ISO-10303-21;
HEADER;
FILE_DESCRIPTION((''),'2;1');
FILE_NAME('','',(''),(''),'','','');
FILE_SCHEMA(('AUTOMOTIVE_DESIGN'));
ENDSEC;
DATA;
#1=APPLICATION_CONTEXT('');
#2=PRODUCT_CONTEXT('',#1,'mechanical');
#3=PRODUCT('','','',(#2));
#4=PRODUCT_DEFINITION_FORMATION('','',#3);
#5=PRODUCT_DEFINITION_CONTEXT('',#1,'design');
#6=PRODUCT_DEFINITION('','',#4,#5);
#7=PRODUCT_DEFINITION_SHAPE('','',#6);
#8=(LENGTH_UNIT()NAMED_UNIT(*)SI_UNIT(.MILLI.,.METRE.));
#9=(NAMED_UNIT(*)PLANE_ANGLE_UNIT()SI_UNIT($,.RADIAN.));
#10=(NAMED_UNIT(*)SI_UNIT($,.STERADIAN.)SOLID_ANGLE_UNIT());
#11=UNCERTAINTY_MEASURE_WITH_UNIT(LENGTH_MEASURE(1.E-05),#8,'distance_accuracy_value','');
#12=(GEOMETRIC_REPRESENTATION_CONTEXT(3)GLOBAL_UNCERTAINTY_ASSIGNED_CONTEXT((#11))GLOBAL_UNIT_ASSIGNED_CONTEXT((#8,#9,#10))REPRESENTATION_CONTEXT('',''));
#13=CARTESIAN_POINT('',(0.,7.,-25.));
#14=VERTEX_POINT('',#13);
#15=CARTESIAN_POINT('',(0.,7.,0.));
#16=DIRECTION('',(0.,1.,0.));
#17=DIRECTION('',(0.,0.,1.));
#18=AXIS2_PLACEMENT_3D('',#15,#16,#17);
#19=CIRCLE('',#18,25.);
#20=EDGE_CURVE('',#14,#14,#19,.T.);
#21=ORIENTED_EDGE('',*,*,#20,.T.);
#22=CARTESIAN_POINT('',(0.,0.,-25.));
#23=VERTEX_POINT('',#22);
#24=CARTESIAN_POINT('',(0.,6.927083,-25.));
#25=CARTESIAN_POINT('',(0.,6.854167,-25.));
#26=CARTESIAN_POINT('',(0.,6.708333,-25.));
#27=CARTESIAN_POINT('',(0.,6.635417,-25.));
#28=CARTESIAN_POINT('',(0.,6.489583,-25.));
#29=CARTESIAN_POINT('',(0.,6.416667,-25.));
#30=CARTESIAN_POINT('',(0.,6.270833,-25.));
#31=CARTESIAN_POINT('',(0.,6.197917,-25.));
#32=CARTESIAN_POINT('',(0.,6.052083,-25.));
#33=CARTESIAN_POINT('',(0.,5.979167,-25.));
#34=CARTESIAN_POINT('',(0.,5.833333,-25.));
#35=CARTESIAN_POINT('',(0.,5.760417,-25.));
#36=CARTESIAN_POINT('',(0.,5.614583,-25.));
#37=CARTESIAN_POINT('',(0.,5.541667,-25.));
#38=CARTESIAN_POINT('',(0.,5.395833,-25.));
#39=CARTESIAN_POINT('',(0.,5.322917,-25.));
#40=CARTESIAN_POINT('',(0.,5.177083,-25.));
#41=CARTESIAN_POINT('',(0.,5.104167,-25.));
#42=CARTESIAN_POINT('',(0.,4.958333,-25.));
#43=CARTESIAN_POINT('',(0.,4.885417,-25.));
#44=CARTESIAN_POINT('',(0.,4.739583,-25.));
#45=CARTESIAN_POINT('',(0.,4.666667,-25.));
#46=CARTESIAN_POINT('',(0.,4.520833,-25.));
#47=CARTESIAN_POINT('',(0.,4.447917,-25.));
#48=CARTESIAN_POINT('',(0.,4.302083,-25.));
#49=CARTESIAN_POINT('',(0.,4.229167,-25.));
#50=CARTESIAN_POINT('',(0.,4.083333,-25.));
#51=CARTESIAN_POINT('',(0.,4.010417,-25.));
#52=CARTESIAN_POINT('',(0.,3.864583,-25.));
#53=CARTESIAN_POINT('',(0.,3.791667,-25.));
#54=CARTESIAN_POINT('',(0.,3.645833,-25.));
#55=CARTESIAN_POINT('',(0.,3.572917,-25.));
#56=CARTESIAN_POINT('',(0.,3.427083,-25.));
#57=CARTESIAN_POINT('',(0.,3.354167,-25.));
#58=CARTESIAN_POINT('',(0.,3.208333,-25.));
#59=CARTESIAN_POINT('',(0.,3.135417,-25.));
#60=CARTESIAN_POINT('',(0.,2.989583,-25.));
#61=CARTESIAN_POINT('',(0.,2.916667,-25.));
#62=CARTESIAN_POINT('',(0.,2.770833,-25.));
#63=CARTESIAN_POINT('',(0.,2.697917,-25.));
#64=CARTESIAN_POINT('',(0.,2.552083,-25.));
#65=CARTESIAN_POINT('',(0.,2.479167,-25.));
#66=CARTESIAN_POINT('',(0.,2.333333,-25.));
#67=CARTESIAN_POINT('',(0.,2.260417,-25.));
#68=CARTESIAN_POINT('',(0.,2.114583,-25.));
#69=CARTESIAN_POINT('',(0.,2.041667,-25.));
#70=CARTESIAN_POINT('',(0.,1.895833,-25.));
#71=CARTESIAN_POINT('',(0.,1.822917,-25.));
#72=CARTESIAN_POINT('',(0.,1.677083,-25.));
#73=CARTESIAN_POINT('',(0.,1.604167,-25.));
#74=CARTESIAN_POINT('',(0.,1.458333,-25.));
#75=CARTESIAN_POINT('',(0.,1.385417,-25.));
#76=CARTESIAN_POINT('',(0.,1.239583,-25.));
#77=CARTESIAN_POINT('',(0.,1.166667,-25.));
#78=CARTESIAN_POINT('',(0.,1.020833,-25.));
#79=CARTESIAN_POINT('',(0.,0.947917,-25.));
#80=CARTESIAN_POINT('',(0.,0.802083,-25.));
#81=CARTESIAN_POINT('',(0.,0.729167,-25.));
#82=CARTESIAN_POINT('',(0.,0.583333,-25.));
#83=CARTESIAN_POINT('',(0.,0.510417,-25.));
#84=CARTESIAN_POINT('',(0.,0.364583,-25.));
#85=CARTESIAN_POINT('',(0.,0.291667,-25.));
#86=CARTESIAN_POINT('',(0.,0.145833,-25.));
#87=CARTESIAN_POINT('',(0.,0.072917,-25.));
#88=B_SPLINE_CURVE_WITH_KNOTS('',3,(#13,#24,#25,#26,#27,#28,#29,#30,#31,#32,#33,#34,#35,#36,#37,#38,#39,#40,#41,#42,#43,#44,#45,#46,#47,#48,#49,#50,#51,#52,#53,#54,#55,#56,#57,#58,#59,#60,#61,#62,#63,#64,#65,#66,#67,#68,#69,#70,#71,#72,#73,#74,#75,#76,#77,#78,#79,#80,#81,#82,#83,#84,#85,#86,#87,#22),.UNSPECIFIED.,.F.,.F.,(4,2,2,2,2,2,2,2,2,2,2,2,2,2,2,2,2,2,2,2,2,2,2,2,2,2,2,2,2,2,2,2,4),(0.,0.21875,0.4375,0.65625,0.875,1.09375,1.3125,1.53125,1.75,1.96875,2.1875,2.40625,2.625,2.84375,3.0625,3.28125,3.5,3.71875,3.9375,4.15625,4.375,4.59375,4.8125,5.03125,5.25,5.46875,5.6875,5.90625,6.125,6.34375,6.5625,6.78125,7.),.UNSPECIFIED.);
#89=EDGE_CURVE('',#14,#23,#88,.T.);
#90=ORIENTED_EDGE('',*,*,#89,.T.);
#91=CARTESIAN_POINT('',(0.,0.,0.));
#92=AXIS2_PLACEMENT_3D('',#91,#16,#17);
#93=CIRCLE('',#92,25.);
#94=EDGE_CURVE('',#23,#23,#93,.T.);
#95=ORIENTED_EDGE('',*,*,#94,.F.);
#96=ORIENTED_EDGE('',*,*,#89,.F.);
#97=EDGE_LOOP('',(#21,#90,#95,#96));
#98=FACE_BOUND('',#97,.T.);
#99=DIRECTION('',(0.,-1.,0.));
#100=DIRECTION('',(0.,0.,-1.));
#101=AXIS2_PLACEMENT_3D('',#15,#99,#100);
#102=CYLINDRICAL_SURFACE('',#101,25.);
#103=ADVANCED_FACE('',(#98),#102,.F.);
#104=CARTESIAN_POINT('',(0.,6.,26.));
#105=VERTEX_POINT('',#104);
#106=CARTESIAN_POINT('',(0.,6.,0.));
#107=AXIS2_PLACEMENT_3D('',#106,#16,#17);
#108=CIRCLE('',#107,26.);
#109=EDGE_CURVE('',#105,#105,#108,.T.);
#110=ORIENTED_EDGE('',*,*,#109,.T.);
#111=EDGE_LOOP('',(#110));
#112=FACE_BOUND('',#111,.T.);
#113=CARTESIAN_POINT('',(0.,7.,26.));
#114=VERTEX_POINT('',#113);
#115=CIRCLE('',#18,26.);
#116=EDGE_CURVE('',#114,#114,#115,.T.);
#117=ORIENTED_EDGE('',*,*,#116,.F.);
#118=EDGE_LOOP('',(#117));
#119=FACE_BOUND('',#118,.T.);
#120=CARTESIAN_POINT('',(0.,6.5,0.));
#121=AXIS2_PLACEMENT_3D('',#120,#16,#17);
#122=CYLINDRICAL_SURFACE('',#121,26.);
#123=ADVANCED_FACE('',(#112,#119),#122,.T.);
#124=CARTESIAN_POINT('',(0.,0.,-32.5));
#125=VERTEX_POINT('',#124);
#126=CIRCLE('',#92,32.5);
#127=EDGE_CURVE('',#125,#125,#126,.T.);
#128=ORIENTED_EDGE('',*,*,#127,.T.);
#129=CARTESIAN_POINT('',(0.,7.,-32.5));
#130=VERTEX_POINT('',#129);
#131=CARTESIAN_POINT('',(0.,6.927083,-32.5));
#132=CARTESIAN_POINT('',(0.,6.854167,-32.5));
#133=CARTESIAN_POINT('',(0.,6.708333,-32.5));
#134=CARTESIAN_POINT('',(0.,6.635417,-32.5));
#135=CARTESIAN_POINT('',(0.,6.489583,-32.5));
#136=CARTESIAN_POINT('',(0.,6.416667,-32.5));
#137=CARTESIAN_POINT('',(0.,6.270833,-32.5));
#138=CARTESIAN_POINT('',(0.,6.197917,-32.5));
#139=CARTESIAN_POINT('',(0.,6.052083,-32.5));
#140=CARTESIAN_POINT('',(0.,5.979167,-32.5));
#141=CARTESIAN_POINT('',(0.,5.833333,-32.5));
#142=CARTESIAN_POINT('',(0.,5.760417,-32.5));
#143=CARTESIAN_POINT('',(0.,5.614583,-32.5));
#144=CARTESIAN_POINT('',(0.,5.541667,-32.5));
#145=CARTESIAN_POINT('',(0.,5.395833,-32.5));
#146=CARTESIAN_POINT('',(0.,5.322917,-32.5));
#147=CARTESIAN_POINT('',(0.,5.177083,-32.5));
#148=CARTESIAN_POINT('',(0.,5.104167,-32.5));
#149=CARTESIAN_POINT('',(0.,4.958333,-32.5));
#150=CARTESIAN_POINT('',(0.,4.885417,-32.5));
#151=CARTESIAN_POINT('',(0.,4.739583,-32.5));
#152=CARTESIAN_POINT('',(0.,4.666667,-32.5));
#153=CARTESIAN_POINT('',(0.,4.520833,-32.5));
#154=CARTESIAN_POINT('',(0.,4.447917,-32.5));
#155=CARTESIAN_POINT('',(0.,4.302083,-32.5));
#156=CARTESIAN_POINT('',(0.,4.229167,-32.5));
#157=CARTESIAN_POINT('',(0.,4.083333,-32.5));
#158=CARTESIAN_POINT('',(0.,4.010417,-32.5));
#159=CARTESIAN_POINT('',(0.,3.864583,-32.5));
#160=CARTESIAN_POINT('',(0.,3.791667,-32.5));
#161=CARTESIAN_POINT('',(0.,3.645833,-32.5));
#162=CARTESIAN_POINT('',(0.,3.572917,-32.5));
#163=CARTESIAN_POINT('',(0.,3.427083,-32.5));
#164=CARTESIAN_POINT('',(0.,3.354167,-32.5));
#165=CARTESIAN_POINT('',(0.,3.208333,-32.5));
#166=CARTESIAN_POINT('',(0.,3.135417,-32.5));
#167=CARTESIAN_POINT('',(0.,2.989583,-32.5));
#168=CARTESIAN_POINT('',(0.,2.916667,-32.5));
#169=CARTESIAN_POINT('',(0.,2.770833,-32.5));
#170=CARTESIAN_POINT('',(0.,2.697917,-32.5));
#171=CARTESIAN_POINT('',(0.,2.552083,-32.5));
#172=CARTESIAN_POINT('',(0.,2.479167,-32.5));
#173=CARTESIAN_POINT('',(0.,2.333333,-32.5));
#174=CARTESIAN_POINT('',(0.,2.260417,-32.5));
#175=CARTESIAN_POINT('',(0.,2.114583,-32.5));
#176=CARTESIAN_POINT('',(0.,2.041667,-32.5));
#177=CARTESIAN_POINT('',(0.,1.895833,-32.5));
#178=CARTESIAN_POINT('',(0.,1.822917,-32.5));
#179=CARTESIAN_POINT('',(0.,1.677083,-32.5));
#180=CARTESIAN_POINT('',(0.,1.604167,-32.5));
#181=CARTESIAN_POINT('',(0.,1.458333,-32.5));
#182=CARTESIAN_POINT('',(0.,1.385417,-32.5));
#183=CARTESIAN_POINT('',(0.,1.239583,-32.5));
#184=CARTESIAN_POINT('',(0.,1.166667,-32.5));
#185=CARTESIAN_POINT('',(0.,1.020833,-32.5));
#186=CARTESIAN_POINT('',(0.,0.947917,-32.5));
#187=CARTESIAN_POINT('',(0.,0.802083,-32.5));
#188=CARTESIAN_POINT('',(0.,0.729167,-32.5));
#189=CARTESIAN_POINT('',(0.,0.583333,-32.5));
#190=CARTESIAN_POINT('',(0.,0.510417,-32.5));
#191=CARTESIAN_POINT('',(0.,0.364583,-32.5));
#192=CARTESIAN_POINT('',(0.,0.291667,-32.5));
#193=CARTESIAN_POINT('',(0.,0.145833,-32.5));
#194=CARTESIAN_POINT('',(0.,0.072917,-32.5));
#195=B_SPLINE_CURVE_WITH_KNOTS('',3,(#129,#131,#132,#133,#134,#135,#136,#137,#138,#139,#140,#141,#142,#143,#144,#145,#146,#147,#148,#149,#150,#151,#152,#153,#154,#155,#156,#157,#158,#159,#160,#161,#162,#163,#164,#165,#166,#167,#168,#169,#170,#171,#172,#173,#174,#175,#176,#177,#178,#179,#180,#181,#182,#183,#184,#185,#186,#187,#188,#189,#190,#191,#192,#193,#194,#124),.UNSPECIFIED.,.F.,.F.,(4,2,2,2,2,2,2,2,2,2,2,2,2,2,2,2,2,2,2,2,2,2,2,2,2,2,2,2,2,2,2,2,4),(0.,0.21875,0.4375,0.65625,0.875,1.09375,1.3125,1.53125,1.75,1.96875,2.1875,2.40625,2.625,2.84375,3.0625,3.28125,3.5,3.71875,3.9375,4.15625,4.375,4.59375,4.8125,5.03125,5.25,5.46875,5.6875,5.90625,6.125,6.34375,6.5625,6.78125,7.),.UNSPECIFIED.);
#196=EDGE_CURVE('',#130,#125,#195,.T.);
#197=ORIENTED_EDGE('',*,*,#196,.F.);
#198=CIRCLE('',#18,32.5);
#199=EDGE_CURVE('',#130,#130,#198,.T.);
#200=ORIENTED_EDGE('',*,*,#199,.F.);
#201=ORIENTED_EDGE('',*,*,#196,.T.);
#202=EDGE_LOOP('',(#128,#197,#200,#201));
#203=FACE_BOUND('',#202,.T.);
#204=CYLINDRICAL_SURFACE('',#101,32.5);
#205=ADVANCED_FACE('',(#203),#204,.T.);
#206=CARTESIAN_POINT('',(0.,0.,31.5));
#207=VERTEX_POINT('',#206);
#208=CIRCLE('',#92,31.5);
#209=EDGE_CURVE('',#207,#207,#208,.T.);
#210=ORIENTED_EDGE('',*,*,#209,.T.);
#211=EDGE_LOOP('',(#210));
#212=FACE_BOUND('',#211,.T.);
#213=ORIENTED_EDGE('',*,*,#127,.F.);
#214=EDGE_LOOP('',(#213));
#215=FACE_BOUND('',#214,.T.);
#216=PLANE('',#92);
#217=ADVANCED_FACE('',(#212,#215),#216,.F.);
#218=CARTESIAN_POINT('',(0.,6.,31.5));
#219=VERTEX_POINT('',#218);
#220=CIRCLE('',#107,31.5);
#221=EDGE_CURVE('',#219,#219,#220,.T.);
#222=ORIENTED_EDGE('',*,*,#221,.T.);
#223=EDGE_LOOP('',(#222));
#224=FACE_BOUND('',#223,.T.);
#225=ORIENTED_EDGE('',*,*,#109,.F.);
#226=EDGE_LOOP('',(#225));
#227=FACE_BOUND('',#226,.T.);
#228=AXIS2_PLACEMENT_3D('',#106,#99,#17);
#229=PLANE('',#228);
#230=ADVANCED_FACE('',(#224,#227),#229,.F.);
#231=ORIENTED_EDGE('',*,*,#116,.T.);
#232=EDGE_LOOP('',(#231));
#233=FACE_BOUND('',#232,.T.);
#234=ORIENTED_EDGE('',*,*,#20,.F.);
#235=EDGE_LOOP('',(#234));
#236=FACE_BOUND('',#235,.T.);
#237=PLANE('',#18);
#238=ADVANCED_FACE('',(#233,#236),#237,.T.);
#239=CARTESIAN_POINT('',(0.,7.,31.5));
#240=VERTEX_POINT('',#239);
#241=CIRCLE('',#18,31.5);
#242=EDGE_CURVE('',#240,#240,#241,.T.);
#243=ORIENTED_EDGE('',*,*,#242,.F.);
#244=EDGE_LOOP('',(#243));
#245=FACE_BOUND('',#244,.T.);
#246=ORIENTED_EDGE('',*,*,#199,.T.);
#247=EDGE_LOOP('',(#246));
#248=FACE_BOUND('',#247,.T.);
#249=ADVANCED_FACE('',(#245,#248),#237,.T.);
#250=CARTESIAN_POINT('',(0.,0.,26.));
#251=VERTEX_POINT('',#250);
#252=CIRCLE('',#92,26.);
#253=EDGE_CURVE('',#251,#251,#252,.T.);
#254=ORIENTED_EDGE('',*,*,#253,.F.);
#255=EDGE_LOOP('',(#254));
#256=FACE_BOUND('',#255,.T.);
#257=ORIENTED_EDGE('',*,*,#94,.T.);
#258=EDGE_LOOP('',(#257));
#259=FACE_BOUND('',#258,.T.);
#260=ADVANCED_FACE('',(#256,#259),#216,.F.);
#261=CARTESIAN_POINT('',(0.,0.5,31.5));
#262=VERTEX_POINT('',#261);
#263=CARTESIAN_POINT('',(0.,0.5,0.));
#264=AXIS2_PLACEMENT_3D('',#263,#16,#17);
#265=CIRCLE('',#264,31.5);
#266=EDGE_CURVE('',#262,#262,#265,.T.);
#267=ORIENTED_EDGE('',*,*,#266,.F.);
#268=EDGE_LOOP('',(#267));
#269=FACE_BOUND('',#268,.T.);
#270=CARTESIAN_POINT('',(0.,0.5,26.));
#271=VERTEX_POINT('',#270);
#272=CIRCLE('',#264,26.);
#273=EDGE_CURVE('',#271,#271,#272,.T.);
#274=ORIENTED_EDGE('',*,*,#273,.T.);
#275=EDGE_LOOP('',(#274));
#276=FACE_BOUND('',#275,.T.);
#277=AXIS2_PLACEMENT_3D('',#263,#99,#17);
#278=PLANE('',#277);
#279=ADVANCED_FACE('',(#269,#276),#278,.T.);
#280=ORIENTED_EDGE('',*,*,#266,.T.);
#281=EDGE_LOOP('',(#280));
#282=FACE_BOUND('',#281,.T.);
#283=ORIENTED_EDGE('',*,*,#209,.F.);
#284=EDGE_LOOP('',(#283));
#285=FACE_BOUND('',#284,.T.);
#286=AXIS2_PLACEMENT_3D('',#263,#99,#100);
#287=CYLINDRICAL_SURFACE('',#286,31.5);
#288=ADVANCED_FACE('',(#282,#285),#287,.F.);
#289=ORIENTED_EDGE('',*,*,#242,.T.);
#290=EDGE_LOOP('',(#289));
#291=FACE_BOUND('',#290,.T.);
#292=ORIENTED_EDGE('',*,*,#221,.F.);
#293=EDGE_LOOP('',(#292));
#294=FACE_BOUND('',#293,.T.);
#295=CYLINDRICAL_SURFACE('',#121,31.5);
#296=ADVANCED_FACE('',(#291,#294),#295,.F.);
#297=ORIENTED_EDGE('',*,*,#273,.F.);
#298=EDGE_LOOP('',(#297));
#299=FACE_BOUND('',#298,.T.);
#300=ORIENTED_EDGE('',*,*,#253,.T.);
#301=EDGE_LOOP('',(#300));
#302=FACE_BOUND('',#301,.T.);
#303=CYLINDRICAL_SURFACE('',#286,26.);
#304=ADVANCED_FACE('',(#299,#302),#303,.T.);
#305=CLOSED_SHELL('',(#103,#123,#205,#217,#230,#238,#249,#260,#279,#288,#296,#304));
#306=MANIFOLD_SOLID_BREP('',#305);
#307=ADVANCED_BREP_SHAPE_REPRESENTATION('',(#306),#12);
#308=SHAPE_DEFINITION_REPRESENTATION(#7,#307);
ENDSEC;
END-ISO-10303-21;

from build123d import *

# Parameters (mm, degrees)
SKETCH1_R             = 32.5
SKETCH1_R_2           = 25
BOSS_EXTRUDE1_DEPTH   = 7
SKETCH2_R             = 31.5
SKETCH2_R_2           = 26
CUT_EXTRUDE1_DEPTH    = 0.5
MIRROR1_OUTLINE_R     = 31.5
MIRROR1_OUTLINE_R_2   = 26
MIRROR1_DEPTH         = 0.5
MIRROR1_START         = 6
MIRROR1_2_OUTLINE_R   = 31.5
MIRROR1_2_OUTLINE_R_2 = 26
MIRROR1_2_DEPTH       = 0.5


# Read off the part's stored shape, not the designer's step: Mirror1
with BuildPart() as part:
    # Sketch1 → Boss-Extrude1 (new body)
    with BuildSketch(Plane(origin=(0, 0, 0), x_dir=(1, 0, 0), z_dir=(0, 1, 0))):
        with Locations(Location((0, 0, 0), (0, 0, 90))):
            Circle(SKETCH1_R)
        with Locations(Location((0, 0, 0), (0, 0, 90))):
            Circle(SKETCH1_R_2, mode=Mode.SUBTRACT)
    extrude(amount=BOSS_EXTRUDE1_DEPTH)

    # Sketch2 → Cut-Extrude1 (cut)
    with BuildSketch(Plane(origin=(0, 7, 0), x_dir=(1, 0, 0), z_dir=(0, 1, 0))):
        with Locations(Location((0, 0, 0), (0, 0, 270))):
            Circle(SKETCH2_R)
        with Locations(Location((0, 0, 0), (0, 0, 270))):
            Circle(SKETCH2_R_2, mode=Mode.SUBTRACT)
    extrude(amount=-CUT_EXTRUDE1_DEPTH, mode=Mode.SUBTRACT)

    # Mirror1 outline → Mirror1 (cut)
    with BuildSketch(Plane(origin=(0, 0, 0), x_dir=(1, 0, 0), z_dir=(0, 1, 0))):
        Circle(MIRROR1_OUTLINE_R)
        Circle(MIRROR1_OUTLINE_R_2, mode=Mode.SUBTRACT)
    extrude(amount=MIRROR1_DEPTH, mode=Mode.SUBTRACT)

    # Mirror1 2 outline → Mirror1 2 (cut)
    with BuildSketch(Plane(origin=(0, 0, 0), x_dir=(1, 0, 0), z_dir=(0, 1, 0)).offset(MIRROR1_START)):
        Circle(MIRROR1_2_OUTLINE_R)
        Circle(MIRROR1_2_OUTLINE_R_2, mode=Mode.SUBTRACT)
    extrude(amount=MIRROR1_2_DEPTH, mode=Mode.SUBTRACT)


solid = part.part
